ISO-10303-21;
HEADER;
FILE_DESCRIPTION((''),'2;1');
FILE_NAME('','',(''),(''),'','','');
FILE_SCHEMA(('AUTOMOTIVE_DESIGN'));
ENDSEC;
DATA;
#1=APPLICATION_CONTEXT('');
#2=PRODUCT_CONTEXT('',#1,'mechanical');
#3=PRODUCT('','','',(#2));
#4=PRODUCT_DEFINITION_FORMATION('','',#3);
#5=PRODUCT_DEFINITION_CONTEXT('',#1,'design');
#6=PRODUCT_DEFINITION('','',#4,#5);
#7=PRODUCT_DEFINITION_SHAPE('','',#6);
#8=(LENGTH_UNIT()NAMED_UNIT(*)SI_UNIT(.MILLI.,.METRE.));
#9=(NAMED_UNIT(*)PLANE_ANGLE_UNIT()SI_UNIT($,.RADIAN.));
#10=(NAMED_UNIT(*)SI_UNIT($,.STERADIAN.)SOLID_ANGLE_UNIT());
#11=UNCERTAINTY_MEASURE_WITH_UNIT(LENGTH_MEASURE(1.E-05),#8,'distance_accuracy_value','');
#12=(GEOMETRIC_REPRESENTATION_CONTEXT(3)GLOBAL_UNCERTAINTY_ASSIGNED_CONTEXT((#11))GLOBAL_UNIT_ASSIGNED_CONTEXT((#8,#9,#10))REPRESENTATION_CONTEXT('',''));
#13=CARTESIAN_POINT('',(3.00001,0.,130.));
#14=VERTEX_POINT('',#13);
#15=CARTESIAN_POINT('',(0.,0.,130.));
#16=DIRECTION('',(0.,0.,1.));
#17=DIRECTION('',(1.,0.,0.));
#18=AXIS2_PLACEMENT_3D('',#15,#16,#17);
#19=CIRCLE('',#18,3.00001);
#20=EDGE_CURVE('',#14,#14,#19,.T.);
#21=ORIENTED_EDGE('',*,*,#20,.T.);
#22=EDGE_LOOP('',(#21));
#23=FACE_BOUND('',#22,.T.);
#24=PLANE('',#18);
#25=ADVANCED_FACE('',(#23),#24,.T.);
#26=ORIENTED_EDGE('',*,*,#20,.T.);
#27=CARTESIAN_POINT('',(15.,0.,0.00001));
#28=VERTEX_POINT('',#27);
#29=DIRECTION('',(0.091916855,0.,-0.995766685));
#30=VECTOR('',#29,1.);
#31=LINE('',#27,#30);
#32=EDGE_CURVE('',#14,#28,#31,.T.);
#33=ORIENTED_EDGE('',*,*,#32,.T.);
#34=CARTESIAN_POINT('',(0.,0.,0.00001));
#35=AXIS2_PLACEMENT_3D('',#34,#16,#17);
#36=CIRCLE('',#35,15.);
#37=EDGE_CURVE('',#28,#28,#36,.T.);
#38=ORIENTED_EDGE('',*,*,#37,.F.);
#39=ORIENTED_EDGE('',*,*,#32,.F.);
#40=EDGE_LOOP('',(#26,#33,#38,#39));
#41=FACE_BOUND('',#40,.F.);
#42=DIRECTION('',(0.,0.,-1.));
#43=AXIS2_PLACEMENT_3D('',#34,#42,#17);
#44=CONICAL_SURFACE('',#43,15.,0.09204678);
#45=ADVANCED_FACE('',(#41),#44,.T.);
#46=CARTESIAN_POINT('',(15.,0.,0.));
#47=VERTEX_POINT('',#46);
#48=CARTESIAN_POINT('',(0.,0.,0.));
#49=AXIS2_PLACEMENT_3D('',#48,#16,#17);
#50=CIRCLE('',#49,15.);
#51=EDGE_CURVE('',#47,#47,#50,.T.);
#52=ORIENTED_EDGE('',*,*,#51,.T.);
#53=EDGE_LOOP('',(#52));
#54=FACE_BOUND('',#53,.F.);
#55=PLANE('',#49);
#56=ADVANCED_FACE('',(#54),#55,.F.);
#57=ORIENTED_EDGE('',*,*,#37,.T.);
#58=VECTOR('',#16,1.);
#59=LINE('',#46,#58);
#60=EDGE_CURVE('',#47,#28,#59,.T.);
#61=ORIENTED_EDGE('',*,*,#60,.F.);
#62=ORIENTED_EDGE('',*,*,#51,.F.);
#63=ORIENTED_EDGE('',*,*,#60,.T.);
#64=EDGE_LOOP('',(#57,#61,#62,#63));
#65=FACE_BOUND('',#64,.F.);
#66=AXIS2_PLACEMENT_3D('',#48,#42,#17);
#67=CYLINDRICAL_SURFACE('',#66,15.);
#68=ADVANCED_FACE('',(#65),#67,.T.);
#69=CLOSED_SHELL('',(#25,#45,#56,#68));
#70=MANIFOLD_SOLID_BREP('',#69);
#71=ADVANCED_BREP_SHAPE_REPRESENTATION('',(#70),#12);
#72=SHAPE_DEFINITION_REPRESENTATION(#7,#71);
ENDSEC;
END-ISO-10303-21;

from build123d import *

# Parameters (mm, degrees)
F0_R     = 15
F1_DEPTH = 130
F2_SIZE2 = 129.99999
F2_SIZE  = 11.99999


# Not quite as in the source:
# - a fillet or chamfer is up to 0.001 mm smaller than in the source, because OpenCascade refuses the exact size


with BuildPart() as f1:
    # F0 (on Top) → F1 (new body)
    with BuildSketch(Plane.XY):
        Circle(F0_R)
    extrude(amount=F1_DEPTH)

    # F2 (size 12 and 130 in the source; OpenCascade refuses exactly that, so slightly less here)
    f2_edges = [f1.edges().sort_by_distance(p)[0] for p in [
        (-15, 0, 130),
    ]]
    f2_side = f1.faces().sort_by_distance((0, 0, 130))[0]
    chamfer(f2_edges, length=F2_SIZE, length2=F2_SIZE2, reference=f2_side)


solid = f1.part
